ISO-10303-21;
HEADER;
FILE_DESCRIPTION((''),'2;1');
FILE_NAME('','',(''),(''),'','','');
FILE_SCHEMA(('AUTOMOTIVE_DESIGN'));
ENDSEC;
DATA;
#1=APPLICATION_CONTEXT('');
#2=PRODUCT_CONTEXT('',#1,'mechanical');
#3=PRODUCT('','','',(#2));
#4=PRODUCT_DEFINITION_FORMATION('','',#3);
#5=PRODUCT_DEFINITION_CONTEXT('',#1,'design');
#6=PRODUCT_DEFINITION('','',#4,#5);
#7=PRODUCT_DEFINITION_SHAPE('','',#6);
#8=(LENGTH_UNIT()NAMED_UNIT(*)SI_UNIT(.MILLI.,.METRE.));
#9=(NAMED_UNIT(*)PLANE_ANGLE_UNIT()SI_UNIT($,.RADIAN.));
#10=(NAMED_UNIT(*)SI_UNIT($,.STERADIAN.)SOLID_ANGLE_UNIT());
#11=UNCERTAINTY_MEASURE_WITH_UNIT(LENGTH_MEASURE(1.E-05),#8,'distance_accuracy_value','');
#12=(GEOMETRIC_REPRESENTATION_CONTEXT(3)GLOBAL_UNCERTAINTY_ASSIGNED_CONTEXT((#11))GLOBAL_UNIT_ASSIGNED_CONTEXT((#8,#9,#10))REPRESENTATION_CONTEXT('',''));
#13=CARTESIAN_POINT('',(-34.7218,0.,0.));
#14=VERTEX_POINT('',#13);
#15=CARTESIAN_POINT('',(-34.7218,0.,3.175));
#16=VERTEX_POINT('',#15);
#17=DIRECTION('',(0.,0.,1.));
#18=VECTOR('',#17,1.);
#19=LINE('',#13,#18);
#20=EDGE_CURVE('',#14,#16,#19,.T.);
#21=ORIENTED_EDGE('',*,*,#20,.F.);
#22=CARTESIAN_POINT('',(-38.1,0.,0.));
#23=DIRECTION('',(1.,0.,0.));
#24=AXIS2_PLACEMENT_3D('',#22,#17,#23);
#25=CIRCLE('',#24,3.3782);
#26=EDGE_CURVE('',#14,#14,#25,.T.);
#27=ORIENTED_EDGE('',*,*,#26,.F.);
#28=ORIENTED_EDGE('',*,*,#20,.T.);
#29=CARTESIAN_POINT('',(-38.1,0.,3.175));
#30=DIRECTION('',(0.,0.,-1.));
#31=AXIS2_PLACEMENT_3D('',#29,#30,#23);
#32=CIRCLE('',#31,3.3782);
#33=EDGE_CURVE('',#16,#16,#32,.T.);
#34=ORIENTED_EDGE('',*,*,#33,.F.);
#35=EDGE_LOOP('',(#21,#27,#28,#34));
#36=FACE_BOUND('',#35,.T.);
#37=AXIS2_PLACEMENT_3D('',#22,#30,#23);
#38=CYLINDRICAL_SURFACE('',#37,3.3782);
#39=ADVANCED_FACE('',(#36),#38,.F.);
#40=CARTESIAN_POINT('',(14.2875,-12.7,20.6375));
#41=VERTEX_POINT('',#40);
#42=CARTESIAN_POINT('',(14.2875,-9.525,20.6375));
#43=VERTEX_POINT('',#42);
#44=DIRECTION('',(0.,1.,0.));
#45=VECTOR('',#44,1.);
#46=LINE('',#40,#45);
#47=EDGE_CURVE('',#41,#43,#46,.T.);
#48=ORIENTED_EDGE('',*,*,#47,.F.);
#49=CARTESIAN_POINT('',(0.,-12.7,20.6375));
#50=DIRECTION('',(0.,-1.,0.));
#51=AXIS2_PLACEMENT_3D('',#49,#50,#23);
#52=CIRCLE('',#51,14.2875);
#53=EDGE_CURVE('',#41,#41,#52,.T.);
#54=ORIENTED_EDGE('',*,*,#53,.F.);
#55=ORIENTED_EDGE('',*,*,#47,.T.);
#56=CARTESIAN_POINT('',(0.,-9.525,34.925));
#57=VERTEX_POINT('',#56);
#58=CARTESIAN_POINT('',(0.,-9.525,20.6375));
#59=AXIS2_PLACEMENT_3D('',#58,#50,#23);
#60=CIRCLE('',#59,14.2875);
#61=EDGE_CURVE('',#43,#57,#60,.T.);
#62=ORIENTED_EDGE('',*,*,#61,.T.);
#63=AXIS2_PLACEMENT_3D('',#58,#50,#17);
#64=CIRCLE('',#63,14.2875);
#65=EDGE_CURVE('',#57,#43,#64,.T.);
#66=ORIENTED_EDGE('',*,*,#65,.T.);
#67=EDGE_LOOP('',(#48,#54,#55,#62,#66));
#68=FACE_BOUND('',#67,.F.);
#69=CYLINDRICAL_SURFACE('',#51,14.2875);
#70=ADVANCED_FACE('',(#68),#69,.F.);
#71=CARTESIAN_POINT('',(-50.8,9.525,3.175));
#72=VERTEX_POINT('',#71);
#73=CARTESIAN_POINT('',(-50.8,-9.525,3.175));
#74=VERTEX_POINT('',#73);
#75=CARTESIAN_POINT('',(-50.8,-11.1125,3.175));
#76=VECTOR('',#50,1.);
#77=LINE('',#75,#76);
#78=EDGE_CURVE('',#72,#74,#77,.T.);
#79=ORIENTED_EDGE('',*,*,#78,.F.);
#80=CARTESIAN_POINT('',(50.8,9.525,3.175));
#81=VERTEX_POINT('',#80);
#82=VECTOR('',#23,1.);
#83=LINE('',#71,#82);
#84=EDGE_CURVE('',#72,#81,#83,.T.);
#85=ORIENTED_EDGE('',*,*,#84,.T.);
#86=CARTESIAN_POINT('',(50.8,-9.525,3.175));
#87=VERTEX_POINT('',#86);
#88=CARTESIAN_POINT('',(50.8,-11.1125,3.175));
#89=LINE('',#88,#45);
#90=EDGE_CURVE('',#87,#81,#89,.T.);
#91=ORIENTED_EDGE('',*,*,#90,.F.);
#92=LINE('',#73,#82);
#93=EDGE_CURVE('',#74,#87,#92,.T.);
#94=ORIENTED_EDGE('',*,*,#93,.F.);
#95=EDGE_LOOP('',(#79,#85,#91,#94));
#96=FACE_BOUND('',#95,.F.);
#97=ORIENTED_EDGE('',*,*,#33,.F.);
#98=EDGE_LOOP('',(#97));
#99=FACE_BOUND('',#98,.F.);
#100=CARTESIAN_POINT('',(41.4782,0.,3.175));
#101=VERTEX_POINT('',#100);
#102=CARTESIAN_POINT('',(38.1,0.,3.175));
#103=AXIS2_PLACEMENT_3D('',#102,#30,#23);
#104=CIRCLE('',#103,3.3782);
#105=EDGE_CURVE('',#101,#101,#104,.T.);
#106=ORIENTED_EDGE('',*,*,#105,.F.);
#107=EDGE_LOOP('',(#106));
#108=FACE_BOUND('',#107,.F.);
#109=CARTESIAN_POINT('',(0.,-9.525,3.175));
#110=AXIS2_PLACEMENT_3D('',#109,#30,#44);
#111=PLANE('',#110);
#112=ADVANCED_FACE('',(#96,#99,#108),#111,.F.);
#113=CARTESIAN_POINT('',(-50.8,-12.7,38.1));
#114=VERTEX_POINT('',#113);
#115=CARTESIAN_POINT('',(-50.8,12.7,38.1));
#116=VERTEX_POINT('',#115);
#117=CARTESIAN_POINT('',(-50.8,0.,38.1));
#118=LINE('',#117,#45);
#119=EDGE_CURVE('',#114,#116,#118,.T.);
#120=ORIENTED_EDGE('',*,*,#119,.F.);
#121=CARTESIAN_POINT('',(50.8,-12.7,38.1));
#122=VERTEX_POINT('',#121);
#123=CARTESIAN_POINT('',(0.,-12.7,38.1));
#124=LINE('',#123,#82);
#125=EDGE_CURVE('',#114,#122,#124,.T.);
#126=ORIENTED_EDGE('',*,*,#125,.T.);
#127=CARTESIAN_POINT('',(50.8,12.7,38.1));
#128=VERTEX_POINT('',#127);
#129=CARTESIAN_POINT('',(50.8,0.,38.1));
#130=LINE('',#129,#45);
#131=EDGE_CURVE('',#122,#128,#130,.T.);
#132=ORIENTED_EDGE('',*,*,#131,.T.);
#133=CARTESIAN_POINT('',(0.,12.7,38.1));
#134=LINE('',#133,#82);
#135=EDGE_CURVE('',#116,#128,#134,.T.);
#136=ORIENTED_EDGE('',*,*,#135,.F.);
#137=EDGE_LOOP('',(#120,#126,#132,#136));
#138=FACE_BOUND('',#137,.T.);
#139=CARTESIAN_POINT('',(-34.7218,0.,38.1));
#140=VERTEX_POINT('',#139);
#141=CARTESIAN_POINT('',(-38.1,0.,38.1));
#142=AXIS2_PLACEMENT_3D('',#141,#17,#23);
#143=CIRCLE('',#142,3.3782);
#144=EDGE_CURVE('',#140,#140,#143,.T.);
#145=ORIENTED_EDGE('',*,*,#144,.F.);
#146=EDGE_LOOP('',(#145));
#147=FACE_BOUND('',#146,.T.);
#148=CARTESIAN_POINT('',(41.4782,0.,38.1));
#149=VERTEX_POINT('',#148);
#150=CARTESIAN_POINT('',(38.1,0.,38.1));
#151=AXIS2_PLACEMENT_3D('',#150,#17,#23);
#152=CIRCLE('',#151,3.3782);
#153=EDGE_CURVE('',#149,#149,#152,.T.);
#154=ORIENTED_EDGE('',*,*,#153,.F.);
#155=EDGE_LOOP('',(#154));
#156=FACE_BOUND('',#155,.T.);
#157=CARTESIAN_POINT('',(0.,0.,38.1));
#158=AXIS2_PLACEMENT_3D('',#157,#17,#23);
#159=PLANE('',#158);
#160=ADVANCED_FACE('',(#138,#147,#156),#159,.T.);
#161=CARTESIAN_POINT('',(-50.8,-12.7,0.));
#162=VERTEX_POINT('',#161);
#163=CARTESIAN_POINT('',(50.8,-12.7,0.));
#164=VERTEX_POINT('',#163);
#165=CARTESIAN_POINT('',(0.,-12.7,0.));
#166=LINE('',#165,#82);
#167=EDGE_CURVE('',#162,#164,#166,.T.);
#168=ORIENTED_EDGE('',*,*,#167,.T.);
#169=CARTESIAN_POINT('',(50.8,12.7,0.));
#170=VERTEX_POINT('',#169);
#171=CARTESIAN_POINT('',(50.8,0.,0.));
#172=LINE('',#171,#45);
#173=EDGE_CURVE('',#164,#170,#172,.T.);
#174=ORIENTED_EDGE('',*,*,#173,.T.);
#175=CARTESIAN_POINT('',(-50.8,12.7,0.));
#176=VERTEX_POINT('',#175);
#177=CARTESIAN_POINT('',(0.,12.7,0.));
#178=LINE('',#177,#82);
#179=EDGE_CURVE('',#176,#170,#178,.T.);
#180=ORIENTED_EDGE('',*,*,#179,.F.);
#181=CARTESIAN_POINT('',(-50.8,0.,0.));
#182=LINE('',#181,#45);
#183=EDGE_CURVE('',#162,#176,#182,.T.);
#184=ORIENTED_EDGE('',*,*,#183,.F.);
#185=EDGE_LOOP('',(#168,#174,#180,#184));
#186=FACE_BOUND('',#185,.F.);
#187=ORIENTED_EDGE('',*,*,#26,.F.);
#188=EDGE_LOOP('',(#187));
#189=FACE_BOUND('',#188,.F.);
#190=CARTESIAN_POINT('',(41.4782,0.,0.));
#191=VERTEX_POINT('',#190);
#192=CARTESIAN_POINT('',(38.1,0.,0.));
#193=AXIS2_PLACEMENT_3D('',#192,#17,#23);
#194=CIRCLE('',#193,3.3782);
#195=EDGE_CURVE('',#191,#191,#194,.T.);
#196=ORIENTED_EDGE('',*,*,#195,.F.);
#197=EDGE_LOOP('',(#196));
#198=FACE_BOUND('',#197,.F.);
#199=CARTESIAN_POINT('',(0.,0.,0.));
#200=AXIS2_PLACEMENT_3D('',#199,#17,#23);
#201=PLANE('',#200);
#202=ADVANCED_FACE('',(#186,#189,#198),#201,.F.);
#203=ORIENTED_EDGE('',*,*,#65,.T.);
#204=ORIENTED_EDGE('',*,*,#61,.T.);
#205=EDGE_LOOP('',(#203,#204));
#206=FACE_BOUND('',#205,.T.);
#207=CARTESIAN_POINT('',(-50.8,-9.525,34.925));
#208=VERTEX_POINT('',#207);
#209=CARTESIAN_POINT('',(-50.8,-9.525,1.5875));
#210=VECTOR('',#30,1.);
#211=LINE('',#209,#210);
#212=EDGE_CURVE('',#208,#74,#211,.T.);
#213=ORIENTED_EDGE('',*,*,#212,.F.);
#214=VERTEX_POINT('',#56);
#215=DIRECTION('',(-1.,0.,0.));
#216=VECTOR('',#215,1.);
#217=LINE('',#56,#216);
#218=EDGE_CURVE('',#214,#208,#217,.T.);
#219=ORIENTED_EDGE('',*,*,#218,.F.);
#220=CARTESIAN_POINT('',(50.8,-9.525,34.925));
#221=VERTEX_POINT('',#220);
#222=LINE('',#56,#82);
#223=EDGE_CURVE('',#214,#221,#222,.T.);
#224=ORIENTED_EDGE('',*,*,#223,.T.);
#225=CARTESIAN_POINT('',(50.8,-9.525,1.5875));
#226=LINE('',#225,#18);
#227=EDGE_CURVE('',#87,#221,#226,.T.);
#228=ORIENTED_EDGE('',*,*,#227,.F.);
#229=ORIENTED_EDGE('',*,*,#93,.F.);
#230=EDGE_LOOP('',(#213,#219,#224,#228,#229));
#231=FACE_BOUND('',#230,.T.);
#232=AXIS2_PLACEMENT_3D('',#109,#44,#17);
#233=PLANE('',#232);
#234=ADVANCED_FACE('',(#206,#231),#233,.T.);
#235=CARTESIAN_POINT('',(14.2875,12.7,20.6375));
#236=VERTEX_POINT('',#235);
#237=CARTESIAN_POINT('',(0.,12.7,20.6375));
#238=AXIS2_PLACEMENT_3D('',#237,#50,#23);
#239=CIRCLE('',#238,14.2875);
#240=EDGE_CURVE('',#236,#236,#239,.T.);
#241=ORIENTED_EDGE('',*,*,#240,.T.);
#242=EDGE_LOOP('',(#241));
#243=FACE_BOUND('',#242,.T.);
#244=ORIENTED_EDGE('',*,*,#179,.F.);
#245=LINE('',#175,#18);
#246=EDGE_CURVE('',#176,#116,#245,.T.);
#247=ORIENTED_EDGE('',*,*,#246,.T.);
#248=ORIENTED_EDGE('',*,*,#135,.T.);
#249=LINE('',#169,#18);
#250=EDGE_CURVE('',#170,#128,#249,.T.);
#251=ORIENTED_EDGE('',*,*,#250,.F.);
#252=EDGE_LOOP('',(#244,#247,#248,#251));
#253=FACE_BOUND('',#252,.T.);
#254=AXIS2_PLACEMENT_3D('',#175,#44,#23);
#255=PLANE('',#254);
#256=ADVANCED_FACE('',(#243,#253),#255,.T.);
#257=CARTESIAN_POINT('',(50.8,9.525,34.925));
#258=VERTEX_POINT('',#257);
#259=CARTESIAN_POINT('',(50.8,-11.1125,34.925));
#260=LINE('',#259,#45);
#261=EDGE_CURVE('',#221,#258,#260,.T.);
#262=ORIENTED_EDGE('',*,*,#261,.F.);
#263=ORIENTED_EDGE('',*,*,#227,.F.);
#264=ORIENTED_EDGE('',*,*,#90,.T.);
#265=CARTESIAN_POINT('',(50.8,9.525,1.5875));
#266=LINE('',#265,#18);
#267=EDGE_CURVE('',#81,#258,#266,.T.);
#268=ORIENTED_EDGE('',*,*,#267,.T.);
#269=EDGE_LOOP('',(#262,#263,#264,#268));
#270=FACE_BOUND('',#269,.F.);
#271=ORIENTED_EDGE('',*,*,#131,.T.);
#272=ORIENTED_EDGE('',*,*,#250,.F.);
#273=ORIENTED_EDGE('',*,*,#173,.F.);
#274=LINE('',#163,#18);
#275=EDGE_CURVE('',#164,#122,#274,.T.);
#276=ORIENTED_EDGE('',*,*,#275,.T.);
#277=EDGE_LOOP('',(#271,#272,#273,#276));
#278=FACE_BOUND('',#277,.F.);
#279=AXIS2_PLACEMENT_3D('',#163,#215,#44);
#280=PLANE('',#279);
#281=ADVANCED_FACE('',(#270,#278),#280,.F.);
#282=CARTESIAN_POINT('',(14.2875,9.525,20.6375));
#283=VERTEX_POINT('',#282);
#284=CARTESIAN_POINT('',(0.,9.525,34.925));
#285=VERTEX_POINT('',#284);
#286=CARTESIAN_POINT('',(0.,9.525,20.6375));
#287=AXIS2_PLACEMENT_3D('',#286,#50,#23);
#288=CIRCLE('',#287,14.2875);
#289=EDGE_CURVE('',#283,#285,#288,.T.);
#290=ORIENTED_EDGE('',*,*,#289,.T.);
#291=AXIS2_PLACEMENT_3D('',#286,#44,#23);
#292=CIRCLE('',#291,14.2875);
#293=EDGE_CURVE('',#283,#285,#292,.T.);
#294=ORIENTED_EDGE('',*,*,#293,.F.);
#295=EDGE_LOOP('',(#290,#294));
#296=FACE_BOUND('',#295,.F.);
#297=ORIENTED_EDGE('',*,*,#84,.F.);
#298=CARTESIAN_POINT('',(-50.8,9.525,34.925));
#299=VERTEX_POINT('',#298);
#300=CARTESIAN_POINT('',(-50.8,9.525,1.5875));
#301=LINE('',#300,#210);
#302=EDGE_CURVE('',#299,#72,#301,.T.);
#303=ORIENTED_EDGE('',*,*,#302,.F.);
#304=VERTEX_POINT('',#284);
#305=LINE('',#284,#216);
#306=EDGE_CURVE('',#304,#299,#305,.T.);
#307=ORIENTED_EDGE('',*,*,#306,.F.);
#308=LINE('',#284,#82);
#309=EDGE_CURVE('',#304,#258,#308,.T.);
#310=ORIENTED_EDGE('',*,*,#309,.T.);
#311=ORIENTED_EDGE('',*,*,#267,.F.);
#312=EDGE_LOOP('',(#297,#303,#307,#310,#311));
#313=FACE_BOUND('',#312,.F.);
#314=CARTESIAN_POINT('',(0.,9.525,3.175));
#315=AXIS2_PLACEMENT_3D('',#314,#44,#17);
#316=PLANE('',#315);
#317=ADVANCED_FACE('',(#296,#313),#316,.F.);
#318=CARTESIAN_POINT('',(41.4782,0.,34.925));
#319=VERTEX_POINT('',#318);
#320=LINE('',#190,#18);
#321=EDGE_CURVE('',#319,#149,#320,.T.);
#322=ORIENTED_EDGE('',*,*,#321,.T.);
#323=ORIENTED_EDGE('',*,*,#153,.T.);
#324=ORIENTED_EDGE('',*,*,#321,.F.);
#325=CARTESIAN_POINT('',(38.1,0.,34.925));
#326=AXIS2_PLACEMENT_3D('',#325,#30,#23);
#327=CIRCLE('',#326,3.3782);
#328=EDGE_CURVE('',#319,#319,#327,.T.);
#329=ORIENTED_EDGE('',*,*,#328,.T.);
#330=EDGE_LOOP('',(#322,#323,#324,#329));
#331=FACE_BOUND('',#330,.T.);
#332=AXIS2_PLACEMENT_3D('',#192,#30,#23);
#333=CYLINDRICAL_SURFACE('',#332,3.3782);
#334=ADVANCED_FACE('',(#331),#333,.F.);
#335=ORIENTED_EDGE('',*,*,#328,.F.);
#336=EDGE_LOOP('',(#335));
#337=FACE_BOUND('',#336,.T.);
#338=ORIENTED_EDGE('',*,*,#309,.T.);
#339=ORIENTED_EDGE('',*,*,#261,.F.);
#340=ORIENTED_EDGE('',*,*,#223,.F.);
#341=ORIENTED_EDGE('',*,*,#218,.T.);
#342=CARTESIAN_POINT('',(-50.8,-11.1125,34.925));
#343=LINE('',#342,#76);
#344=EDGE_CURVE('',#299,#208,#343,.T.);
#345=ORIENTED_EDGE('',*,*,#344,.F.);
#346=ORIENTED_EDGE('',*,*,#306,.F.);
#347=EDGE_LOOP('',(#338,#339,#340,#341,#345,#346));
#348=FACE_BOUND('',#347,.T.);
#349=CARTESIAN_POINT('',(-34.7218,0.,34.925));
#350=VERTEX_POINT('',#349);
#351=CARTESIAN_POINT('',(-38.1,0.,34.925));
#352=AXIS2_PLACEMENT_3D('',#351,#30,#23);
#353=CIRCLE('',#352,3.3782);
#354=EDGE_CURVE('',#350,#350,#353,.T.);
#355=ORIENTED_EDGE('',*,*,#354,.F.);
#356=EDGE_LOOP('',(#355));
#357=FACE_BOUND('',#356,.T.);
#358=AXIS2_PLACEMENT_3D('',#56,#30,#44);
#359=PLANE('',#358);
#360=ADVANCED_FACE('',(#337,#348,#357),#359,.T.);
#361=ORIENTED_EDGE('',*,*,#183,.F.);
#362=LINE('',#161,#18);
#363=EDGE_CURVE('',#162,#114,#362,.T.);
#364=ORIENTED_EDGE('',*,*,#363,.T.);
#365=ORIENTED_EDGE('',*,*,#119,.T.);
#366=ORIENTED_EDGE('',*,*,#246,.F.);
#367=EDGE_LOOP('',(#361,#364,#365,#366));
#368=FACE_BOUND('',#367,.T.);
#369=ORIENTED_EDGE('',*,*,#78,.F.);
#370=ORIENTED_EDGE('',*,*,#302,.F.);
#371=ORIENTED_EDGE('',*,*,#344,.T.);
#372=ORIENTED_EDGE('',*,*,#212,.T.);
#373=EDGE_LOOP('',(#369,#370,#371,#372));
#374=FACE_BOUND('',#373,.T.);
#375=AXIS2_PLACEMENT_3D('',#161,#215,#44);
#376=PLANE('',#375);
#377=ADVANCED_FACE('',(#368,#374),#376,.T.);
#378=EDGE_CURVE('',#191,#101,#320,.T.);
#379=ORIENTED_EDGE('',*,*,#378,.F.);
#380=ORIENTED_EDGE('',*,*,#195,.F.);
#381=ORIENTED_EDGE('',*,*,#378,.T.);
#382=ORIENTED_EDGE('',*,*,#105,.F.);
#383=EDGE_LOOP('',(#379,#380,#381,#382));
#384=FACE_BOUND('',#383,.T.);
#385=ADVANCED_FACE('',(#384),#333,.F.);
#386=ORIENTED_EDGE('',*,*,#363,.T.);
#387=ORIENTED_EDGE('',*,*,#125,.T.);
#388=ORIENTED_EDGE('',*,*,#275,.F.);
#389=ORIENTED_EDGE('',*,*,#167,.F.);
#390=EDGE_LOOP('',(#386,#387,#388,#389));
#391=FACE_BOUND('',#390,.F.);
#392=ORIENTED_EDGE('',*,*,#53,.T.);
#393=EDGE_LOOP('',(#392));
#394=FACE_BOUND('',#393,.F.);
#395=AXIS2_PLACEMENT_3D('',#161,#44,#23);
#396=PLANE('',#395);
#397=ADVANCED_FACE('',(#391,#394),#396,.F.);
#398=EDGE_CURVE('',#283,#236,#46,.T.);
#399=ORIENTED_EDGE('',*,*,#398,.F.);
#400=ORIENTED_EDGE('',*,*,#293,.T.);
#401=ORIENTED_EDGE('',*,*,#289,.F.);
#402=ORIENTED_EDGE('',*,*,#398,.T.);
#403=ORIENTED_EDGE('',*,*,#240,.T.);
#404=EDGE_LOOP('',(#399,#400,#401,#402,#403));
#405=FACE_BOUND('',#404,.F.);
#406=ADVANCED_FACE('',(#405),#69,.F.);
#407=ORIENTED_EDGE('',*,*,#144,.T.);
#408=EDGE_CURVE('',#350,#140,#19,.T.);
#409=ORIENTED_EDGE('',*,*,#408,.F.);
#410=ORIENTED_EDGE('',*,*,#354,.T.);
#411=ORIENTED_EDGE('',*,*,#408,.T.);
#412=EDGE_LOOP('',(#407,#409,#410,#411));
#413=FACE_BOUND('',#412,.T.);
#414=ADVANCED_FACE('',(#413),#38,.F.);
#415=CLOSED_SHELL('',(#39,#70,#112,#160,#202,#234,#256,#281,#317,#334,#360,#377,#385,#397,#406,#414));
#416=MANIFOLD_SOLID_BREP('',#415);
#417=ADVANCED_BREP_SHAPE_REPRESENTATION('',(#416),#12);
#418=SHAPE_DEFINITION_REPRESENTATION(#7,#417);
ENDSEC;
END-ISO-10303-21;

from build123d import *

# Parameters (mm, degrees)
F0_W          = 101.6
F0_H          = 25.4
F0_R          = 3.3782
F1_DEPTH      = 38.1
F2_R          = 14.2875
F3_DEPTH      = 25.4
F4_W          = 19.05
F4_H          = 31.75
F5_DEPTH      = 50.801
F5_DEPTH_BACK = 50.801


# Not quite as in the source:
# - a feature names something its author has since deleted; it is built from what else it names


with BuildPart() as f1:
    # F0 (on Top) → F1 (new body)
    with BuildSketch(Plane.XY):
        Rectangle(F0_W, F0_H)
        with Locations((-38.1, 0)):
            Circle(F0_R, mode=Mode.SUBTRACT)
        with Locations((38.1, 0)):
            Circle(F0_R, mode=Mode.SUBTRACT)
    extrude(amount=F1_DEPTH)

    # F2 (on face) → F3 (cut)
    with BuildSketch(Plane.XZ.offset(12.7)):
        with Locations((0, 20.6375)):
            Circle(F2_R)
    extrude(amount=-F3_DEPTH, mode=Mode.SUBTRACT)

    # F4 (on Right) → F5 (cut, two sides)
    with BuildSketch(Plane.YZ) as f5_sk:
        with Locations((0, 19.05)):
            Rectangle(F4_W, F4_H)
    extrude(amount=-F5_DEPTH, mode=Mode.SUBTRACT)
    extrude(f5_sk.sketch, amount=F5_DEPTH_BACK, mode=Mode.SUBTRACT)


solid = f1.part
